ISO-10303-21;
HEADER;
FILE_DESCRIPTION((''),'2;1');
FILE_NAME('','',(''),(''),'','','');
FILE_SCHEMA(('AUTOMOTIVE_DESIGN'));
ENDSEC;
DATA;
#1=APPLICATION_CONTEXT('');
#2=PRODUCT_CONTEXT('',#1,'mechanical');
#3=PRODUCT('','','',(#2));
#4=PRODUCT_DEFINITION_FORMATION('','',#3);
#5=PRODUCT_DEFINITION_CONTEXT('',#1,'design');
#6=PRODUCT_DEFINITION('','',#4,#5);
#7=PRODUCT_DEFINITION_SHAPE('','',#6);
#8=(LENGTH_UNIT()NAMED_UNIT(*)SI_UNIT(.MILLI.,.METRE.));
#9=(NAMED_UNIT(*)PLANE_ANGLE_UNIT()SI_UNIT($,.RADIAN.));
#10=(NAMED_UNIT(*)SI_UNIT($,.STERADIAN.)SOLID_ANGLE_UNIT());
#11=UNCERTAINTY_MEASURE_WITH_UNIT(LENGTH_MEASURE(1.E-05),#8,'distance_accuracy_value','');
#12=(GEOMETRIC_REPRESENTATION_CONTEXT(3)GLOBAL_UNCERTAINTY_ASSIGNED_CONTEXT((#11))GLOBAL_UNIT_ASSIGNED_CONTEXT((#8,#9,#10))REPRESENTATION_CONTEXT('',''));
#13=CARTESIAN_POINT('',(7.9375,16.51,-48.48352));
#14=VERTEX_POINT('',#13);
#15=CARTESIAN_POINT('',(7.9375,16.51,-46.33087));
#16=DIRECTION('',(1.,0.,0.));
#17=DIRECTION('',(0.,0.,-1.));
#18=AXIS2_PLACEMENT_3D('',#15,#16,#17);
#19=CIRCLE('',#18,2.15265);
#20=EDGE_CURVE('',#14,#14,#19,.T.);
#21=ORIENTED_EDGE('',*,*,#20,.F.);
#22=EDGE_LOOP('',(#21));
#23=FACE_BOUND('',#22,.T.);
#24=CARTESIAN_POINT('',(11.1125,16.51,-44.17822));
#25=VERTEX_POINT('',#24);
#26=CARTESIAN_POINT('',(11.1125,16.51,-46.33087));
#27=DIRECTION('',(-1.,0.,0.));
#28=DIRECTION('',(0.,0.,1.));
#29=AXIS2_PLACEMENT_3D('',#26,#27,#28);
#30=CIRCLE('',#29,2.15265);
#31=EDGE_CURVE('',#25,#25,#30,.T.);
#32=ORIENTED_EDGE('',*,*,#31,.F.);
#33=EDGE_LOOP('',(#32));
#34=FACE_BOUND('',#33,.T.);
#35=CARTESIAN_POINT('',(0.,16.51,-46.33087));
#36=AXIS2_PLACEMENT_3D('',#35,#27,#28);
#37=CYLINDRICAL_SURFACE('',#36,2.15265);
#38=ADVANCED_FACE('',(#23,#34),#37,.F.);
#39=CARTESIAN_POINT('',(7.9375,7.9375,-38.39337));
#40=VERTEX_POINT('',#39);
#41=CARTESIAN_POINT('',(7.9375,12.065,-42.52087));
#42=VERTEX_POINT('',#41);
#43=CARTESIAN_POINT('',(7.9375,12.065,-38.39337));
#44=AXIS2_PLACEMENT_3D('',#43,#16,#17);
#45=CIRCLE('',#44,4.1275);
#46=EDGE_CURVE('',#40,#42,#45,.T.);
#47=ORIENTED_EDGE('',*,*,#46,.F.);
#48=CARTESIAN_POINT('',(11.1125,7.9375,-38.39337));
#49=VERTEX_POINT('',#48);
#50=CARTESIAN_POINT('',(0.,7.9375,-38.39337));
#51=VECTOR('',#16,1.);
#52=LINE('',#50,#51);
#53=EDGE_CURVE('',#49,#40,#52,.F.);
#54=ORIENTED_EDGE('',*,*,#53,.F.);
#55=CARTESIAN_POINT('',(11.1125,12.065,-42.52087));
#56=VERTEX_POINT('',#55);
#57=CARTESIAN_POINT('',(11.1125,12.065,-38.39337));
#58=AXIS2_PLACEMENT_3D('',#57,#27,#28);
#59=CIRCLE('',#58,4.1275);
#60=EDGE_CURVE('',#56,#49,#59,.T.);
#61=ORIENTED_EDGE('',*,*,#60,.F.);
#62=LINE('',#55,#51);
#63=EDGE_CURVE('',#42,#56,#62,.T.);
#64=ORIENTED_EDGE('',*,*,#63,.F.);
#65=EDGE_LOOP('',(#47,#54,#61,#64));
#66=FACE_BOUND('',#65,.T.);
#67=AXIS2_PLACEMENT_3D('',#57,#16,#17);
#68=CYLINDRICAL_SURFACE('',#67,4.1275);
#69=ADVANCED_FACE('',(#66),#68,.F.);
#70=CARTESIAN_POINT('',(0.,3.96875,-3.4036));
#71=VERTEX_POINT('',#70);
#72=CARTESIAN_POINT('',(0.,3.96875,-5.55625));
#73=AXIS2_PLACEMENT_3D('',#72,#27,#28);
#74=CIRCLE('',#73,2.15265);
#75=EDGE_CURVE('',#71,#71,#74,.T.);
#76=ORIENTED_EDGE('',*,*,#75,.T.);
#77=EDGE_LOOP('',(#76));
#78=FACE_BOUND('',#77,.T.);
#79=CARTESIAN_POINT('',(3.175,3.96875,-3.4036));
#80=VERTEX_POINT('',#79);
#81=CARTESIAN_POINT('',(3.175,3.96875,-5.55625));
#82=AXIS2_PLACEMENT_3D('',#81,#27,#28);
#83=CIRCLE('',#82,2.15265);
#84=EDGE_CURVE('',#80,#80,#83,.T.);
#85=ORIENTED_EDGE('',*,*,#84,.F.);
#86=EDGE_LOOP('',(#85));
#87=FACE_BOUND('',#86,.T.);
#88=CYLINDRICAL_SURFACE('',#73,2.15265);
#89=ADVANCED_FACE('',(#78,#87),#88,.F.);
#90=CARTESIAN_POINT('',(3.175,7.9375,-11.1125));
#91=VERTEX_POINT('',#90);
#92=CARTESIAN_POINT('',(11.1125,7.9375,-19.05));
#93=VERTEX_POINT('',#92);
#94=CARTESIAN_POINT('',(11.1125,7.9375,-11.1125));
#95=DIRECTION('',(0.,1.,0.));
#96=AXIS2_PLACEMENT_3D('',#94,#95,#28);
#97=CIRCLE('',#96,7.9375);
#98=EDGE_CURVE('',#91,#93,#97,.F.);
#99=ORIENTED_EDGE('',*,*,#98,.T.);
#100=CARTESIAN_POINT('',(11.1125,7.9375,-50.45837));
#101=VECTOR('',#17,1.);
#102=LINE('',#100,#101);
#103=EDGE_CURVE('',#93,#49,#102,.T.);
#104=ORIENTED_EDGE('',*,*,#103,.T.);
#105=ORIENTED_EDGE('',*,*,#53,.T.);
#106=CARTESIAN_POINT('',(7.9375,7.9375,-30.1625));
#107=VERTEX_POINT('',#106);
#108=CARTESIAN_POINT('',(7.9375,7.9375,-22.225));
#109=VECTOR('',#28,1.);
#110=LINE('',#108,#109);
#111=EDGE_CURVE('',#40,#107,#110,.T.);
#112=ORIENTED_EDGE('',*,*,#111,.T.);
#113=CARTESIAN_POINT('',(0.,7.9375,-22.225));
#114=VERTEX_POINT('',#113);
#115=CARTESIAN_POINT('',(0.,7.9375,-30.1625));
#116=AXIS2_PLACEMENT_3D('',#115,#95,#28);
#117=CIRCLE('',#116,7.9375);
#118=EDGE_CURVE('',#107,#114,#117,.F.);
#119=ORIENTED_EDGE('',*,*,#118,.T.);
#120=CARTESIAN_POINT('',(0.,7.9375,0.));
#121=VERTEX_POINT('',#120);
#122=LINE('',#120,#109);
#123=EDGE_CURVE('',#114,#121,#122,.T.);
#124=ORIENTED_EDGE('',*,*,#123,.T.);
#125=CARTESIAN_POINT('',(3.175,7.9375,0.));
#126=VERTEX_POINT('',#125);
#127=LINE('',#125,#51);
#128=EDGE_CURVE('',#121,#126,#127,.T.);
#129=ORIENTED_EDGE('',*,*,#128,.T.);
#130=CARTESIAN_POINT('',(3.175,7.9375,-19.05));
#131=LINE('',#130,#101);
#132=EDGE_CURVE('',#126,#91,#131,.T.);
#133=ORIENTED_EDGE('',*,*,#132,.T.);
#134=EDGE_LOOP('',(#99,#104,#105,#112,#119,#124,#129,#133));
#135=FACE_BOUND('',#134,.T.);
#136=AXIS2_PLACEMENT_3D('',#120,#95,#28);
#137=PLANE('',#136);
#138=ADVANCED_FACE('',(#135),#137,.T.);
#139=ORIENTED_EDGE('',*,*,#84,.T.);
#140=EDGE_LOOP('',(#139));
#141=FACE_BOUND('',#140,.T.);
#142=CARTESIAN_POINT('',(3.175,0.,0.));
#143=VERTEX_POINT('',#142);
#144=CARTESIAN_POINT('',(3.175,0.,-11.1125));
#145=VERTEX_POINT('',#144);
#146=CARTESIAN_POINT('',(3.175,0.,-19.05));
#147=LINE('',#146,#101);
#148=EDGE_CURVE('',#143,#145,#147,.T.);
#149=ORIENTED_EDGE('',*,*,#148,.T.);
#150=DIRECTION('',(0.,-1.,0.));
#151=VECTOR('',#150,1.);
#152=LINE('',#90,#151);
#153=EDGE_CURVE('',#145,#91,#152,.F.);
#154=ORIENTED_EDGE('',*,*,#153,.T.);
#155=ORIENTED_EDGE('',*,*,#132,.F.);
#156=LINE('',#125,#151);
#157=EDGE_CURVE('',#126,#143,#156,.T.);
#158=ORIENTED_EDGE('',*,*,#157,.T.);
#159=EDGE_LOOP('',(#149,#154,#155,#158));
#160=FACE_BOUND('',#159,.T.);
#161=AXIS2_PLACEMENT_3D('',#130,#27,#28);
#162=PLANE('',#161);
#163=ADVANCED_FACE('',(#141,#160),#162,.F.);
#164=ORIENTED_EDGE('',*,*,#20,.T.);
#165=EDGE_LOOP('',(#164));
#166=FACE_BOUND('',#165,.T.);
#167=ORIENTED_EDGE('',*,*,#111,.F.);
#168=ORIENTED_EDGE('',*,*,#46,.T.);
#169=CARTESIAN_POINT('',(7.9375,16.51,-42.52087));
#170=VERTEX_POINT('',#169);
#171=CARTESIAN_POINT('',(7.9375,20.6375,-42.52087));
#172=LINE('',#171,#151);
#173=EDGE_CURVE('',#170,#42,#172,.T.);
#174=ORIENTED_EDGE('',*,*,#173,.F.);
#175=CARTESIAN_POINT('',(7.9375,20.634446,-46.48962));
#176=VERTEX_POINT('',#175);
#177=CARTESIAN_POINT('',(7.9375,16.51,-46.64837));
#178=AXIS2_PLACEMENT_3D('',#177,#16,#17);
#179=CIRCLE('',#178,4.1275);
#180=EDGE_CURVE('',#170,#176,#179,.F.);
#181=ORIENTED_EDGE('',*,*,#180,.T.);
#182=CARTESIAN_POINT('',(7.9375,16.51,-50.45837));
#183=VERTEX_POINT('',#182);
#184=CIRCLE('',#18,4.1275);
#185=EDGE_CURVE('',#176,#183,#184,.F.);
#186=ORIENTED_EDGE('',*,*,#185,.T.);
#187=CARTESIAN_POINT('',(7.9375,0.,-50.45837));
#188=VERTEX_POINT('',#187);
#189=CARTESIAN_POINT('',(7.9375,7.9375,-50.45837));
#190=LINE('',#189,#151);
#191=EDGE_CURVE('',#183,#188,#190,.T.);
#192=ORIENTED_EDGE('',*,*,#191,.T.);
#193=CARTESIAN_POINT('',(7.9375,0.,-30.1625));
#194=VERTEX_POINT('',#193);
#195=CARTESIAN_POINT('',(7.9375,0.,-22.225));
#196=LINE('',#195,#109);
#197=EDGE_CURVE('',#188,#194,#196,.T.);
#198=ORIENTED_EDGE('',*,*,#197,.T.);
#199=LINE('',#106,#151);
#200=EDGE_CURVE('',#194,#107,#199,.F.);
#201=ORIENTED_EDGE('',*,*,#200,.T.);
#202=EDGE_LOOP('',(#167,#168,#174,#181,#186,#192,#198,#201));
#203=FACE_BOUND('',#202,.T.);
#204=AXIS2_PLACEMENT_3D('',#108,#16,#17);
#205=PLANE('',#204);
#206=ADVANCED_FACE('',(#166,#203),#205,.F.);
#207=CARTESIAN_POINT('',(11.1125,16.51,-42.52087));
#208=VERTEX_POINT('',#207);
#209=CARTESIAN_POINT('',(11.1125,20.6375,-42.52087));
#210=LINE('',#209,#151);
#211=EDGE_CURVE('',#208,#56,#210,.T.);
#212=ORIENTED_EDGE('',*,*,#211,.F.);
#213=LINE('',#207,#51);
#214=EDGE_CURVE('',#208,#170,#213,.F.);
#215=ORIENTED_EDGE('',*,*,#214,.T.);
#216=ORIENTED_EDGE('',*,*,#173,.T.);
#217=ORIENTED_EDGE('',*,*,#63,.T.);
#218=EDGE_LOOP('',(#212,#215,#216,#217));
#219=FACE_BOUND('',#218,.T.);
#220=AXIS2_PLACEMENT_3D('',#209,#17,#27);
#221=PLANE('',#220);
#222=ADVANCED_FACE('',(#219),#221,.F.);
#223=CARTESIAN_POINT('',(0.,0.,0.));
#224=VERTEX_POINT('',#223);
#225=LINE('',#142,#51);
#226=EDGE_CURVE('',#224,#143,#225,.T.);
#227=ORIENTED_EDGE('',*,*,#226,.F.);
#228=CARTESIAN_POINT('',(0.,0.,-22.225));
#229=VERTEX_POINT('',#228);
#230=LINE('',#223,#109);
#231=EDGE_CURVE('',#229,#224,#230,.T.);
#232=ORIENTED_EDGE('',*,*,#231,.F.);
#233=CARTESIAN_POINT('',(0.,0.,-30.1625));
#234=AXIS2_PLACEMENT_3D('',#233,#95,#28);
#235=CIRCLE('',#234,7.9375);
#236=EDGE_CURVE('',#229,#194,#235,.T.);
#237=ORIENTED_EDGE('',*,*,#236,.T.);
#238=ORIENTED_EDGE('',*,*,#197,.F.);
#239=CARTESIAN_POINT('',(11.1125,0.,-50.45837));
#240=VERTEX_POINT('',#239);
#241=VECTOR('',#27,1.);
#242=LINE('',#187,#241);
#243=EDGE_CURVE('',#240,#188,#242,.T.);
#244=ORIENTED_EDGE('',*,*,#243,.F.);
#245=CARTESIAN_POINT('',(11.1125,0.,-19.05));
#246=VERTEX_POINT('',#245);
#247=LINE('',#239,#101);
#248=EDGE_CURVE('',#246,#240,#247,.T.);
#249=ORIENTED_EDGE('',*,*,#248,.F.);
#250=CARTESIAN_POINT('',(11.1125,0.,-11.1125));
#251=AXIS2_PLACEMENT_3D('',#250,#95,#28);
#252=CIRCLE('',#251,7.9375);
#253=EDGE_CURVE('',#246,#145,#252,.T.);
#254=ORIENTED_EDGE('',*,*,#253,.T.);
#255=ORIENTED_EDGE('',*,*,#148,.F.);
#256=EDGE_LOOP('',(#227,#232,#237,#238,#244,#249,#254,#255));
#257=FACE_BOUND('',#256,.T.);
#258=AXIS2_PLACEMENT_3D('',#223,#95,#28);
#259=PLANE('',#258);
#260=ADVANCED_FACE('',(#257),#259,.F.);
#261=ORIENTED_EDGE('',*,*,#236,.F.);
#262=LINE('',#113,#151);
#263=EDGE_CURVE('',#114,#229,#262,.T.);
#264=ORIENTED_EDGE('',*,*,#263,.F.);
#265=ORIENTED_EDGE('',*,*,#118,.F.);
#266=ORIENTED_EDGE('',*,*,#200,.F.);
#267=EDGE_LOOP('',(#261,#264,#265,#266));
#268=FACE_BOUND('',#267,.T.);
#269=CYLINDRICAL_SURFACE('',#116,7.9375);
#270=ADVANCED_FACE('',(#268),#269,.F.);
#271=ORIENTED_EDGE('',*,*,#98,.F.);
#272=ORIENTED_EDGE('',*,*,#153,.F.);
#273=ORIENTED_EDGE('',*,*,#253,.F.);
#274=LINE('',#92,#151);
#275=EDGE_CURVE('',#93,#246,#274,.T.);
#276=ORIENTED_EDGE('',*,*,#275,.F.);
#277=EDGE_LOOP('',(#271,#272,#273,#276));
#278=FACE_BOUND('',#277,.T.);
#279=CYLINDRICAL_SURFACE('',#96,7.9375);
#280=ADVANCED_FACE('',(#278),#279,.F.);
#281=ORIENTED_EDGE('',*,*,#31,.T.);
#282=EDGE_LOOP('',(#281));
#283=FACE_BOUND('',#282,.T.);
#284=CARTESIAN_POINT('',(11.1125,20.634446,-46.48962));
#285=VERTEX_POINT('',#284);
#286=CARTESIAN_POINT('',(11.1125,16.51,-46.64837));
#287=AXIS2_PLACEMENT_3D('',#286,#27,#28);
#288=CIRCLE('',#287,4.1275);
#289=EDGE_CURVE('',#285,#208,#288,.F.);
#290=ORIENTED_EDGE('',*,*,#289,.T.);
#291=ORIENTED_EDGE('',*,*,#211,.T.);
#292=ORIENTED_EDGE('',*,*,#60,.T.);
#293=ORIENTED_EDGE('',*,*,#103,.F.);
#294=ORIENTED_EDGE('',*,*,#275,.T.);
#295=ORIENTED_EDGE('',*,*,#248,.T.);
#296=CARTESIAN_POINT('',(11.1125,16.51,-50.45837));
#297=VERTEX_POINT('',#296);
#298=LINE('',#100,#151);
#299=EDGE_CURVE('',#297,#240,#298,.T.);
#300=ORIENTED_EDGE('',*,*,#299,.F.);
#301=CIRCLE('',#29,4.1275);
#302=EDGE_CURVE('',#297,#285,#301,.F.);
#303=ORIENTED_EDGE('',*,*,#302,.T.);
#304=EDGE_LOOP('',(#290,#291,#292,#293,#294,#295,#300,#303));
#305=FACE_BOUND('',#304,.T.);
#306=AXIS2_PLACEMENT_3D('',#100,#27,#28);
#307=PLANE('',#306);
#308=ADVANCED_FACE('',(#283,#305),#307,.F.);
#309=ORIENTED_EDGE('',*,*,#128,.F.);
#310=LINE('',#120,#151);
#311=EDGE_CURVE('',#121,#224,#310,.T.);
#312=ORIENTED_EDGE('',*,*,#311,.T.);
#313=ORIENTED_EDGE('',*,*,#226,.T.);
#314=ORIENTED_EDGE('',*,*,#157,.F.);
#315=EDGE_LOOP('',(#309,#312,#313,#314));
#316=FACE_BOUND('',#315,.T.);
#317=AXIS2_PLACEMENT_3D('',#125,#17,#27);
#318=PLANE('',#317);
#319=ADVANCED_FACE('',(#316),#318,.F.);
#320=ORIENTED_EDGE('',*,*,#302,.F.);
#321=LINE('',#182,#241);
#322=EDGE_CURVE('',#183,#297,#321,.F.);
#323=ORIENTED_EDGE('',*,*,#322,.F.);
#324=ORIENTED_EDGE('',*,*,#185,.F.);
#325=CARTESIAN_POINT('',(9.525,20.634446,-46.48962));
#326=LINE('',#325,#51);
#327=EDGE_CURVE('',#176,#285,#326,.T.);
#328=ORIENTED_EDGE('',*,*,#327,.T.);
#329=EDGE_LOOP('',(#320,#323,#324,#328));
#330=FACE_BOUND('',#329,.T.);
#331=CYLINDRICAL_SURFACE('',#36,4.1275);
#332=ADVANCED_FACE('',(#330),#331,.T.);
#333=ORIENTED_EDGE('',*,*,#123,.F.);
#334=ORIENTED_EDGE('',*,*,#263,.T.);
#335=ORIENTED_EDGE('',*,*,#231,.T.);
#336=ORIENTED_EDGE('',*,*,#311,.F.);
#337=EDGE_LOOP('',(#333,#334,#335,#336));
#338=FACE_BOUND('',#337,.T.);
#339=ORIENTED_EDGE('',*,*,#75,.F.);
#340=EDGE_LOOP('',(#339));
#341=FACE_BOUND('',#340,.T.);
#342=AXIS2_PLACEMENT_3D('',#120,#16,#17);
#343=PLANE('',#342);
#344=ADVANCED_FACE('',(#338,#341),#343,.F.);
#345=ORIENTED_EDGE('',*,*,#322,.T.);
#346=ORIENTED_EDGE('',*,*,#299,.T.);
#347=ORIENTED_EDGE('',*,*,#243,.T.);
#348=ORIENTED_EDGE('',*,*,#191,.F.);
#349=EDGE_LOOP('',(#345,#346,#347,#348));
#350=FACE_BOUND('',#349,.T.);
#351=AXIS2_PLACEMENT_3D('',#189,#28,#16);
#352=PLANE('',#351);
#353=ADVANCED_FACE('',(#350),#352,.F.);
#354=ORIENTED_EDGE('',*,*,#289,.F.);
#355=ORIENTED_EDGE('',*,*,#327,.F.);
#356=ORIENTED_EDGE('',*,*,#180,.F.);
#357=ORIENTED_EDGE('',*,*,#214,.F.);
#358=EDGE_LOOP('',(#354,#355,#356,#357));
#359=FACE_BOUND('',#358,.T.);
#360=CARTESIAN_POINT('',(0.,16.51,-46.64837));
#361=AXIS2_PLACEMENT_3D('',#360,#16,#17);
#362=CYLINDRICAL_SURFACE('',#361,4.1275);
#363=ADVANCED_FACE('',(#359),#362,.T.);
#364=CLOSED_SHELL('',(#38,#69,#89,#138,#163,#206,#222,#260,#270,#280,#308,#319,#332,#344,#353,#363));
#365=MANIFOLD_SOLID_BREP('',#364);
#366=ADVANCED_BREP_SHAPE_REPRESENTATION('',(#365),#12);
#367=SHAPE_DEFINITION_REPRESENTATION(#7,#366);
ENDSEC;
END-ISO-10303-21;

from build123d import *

# Parameters (mm, degrees)
BOSS_EXTRUDE1_DEPTH   = 7.9375
FILLET1_R             = 7.9375
SKETCH6_W             = 3.175
SKETCH6_H             = 7.9375
BOSS_EXTRUDE2_DEPTH   = 12.7
FILLET2_R             = 4.1275
FILLET3_R             = 4.1275
F_6_CLEARANCE_HOLE1_D = 4.3053


# Some blends are built 0.0001 mm under size
with BuildPart() as part:
    # Sketch1 → Boss-Extrude1 (new body)
    with BuildSketch(Plane(origin=(0, 0, 0), x_dir=(1, 0, 0), z_dir=(0, 1, 0))):
        Polygon((0, 0), (0, 22.225), (7.9375, 22.225), (7.9375, 50.45837), (11.1125, 50.45837), (11.1125, 19.05), (3.175, 19.05), (3.175, 0), align=None)
    extrude(amount=BOSS_EXTRUDE1_DEPTH)

    # Fillet1
    fillet1_edges = [part.edges().sort_by_distance(p)[0] for p in [
        (7.9375, 3.96875, -22.225),
        (3.175, 3.96875, -19.05),
    ]]
    fillet(fillet1_edges, radius=FILLET1_R - 0.0001)  # a hair under: the kernel refuses the full size

    # Sketch6 → Boss-Extrude2 (add)
    with BuildSketch(Plane(origin=(0, 7.9375, 0), x_dir=(1, 0, 0), z_dir=(0, 1, 0))):
        with Locations((9.525, 46.48962)):
            Rectangle(SKETCH6_W, SKETCH6_H)
    extrude(amount=BOSS_EXTRUDE2_DEPTH)

    # Fillet2
    # the kernel refuses this fillet: 4.1275 mm, written as the material it takes off along each edge
    with BuildSketch(Plane(origin=(21.43125, 20.6375, -50.45837), x_dir=(0, -1, 0), z_dir=(-1, 0, 0))) as fillet2_piece_1:
        with BuildLine():
            CenterArc((FILLET2_R, FILLET2_R), FILLET2_R, 180, 90)
            Line((0, FILLET2_R), (0, 0))
            Line((0, 0), (FILLET2_R, 0))
        make_face()
    extrude(amount=23.8125, mode=Mode.SUBTRACT)
    with BuildSketch(Plane(origin=(-2.38125, 20.6375, -42.52087), x_dir=(0, 0, -1), z_dir=(1, 0, 0))) as fillet2_piece_2:
        with BuildLine():
            CenterArc((FILLET2_R, -FILLET2_R), FILLET2_R, 90, 90)
            Line((0, -FILLET2_R), (0, 0))
            Line((0, 0), (FILLET2_R, 0))
        make_face()
    extrude(amount=23.8125, mode=Mode.SUBTRACT)

    # Fillet3
    fillet3_edges = [part.edges().sort_by_distance(p)[0] for p in [
        (9.525, 7.9375, -42.52087),
    ]]
    fillet(fillet3_edges, radius=FILLET3_R)

    # #6 Clearance Hole1 (through all)
    with Locations(Plane(origin=(0, 0, 0), x_dir=(0, 0, -1), z_dir=(-1, 0, 0))):
        with Locations((5.55625, -3.96875), (46.33087, -16.51)):
            Hole(F_6_CLEARANCE_HOLE1_D / 2)


solid = part.part
